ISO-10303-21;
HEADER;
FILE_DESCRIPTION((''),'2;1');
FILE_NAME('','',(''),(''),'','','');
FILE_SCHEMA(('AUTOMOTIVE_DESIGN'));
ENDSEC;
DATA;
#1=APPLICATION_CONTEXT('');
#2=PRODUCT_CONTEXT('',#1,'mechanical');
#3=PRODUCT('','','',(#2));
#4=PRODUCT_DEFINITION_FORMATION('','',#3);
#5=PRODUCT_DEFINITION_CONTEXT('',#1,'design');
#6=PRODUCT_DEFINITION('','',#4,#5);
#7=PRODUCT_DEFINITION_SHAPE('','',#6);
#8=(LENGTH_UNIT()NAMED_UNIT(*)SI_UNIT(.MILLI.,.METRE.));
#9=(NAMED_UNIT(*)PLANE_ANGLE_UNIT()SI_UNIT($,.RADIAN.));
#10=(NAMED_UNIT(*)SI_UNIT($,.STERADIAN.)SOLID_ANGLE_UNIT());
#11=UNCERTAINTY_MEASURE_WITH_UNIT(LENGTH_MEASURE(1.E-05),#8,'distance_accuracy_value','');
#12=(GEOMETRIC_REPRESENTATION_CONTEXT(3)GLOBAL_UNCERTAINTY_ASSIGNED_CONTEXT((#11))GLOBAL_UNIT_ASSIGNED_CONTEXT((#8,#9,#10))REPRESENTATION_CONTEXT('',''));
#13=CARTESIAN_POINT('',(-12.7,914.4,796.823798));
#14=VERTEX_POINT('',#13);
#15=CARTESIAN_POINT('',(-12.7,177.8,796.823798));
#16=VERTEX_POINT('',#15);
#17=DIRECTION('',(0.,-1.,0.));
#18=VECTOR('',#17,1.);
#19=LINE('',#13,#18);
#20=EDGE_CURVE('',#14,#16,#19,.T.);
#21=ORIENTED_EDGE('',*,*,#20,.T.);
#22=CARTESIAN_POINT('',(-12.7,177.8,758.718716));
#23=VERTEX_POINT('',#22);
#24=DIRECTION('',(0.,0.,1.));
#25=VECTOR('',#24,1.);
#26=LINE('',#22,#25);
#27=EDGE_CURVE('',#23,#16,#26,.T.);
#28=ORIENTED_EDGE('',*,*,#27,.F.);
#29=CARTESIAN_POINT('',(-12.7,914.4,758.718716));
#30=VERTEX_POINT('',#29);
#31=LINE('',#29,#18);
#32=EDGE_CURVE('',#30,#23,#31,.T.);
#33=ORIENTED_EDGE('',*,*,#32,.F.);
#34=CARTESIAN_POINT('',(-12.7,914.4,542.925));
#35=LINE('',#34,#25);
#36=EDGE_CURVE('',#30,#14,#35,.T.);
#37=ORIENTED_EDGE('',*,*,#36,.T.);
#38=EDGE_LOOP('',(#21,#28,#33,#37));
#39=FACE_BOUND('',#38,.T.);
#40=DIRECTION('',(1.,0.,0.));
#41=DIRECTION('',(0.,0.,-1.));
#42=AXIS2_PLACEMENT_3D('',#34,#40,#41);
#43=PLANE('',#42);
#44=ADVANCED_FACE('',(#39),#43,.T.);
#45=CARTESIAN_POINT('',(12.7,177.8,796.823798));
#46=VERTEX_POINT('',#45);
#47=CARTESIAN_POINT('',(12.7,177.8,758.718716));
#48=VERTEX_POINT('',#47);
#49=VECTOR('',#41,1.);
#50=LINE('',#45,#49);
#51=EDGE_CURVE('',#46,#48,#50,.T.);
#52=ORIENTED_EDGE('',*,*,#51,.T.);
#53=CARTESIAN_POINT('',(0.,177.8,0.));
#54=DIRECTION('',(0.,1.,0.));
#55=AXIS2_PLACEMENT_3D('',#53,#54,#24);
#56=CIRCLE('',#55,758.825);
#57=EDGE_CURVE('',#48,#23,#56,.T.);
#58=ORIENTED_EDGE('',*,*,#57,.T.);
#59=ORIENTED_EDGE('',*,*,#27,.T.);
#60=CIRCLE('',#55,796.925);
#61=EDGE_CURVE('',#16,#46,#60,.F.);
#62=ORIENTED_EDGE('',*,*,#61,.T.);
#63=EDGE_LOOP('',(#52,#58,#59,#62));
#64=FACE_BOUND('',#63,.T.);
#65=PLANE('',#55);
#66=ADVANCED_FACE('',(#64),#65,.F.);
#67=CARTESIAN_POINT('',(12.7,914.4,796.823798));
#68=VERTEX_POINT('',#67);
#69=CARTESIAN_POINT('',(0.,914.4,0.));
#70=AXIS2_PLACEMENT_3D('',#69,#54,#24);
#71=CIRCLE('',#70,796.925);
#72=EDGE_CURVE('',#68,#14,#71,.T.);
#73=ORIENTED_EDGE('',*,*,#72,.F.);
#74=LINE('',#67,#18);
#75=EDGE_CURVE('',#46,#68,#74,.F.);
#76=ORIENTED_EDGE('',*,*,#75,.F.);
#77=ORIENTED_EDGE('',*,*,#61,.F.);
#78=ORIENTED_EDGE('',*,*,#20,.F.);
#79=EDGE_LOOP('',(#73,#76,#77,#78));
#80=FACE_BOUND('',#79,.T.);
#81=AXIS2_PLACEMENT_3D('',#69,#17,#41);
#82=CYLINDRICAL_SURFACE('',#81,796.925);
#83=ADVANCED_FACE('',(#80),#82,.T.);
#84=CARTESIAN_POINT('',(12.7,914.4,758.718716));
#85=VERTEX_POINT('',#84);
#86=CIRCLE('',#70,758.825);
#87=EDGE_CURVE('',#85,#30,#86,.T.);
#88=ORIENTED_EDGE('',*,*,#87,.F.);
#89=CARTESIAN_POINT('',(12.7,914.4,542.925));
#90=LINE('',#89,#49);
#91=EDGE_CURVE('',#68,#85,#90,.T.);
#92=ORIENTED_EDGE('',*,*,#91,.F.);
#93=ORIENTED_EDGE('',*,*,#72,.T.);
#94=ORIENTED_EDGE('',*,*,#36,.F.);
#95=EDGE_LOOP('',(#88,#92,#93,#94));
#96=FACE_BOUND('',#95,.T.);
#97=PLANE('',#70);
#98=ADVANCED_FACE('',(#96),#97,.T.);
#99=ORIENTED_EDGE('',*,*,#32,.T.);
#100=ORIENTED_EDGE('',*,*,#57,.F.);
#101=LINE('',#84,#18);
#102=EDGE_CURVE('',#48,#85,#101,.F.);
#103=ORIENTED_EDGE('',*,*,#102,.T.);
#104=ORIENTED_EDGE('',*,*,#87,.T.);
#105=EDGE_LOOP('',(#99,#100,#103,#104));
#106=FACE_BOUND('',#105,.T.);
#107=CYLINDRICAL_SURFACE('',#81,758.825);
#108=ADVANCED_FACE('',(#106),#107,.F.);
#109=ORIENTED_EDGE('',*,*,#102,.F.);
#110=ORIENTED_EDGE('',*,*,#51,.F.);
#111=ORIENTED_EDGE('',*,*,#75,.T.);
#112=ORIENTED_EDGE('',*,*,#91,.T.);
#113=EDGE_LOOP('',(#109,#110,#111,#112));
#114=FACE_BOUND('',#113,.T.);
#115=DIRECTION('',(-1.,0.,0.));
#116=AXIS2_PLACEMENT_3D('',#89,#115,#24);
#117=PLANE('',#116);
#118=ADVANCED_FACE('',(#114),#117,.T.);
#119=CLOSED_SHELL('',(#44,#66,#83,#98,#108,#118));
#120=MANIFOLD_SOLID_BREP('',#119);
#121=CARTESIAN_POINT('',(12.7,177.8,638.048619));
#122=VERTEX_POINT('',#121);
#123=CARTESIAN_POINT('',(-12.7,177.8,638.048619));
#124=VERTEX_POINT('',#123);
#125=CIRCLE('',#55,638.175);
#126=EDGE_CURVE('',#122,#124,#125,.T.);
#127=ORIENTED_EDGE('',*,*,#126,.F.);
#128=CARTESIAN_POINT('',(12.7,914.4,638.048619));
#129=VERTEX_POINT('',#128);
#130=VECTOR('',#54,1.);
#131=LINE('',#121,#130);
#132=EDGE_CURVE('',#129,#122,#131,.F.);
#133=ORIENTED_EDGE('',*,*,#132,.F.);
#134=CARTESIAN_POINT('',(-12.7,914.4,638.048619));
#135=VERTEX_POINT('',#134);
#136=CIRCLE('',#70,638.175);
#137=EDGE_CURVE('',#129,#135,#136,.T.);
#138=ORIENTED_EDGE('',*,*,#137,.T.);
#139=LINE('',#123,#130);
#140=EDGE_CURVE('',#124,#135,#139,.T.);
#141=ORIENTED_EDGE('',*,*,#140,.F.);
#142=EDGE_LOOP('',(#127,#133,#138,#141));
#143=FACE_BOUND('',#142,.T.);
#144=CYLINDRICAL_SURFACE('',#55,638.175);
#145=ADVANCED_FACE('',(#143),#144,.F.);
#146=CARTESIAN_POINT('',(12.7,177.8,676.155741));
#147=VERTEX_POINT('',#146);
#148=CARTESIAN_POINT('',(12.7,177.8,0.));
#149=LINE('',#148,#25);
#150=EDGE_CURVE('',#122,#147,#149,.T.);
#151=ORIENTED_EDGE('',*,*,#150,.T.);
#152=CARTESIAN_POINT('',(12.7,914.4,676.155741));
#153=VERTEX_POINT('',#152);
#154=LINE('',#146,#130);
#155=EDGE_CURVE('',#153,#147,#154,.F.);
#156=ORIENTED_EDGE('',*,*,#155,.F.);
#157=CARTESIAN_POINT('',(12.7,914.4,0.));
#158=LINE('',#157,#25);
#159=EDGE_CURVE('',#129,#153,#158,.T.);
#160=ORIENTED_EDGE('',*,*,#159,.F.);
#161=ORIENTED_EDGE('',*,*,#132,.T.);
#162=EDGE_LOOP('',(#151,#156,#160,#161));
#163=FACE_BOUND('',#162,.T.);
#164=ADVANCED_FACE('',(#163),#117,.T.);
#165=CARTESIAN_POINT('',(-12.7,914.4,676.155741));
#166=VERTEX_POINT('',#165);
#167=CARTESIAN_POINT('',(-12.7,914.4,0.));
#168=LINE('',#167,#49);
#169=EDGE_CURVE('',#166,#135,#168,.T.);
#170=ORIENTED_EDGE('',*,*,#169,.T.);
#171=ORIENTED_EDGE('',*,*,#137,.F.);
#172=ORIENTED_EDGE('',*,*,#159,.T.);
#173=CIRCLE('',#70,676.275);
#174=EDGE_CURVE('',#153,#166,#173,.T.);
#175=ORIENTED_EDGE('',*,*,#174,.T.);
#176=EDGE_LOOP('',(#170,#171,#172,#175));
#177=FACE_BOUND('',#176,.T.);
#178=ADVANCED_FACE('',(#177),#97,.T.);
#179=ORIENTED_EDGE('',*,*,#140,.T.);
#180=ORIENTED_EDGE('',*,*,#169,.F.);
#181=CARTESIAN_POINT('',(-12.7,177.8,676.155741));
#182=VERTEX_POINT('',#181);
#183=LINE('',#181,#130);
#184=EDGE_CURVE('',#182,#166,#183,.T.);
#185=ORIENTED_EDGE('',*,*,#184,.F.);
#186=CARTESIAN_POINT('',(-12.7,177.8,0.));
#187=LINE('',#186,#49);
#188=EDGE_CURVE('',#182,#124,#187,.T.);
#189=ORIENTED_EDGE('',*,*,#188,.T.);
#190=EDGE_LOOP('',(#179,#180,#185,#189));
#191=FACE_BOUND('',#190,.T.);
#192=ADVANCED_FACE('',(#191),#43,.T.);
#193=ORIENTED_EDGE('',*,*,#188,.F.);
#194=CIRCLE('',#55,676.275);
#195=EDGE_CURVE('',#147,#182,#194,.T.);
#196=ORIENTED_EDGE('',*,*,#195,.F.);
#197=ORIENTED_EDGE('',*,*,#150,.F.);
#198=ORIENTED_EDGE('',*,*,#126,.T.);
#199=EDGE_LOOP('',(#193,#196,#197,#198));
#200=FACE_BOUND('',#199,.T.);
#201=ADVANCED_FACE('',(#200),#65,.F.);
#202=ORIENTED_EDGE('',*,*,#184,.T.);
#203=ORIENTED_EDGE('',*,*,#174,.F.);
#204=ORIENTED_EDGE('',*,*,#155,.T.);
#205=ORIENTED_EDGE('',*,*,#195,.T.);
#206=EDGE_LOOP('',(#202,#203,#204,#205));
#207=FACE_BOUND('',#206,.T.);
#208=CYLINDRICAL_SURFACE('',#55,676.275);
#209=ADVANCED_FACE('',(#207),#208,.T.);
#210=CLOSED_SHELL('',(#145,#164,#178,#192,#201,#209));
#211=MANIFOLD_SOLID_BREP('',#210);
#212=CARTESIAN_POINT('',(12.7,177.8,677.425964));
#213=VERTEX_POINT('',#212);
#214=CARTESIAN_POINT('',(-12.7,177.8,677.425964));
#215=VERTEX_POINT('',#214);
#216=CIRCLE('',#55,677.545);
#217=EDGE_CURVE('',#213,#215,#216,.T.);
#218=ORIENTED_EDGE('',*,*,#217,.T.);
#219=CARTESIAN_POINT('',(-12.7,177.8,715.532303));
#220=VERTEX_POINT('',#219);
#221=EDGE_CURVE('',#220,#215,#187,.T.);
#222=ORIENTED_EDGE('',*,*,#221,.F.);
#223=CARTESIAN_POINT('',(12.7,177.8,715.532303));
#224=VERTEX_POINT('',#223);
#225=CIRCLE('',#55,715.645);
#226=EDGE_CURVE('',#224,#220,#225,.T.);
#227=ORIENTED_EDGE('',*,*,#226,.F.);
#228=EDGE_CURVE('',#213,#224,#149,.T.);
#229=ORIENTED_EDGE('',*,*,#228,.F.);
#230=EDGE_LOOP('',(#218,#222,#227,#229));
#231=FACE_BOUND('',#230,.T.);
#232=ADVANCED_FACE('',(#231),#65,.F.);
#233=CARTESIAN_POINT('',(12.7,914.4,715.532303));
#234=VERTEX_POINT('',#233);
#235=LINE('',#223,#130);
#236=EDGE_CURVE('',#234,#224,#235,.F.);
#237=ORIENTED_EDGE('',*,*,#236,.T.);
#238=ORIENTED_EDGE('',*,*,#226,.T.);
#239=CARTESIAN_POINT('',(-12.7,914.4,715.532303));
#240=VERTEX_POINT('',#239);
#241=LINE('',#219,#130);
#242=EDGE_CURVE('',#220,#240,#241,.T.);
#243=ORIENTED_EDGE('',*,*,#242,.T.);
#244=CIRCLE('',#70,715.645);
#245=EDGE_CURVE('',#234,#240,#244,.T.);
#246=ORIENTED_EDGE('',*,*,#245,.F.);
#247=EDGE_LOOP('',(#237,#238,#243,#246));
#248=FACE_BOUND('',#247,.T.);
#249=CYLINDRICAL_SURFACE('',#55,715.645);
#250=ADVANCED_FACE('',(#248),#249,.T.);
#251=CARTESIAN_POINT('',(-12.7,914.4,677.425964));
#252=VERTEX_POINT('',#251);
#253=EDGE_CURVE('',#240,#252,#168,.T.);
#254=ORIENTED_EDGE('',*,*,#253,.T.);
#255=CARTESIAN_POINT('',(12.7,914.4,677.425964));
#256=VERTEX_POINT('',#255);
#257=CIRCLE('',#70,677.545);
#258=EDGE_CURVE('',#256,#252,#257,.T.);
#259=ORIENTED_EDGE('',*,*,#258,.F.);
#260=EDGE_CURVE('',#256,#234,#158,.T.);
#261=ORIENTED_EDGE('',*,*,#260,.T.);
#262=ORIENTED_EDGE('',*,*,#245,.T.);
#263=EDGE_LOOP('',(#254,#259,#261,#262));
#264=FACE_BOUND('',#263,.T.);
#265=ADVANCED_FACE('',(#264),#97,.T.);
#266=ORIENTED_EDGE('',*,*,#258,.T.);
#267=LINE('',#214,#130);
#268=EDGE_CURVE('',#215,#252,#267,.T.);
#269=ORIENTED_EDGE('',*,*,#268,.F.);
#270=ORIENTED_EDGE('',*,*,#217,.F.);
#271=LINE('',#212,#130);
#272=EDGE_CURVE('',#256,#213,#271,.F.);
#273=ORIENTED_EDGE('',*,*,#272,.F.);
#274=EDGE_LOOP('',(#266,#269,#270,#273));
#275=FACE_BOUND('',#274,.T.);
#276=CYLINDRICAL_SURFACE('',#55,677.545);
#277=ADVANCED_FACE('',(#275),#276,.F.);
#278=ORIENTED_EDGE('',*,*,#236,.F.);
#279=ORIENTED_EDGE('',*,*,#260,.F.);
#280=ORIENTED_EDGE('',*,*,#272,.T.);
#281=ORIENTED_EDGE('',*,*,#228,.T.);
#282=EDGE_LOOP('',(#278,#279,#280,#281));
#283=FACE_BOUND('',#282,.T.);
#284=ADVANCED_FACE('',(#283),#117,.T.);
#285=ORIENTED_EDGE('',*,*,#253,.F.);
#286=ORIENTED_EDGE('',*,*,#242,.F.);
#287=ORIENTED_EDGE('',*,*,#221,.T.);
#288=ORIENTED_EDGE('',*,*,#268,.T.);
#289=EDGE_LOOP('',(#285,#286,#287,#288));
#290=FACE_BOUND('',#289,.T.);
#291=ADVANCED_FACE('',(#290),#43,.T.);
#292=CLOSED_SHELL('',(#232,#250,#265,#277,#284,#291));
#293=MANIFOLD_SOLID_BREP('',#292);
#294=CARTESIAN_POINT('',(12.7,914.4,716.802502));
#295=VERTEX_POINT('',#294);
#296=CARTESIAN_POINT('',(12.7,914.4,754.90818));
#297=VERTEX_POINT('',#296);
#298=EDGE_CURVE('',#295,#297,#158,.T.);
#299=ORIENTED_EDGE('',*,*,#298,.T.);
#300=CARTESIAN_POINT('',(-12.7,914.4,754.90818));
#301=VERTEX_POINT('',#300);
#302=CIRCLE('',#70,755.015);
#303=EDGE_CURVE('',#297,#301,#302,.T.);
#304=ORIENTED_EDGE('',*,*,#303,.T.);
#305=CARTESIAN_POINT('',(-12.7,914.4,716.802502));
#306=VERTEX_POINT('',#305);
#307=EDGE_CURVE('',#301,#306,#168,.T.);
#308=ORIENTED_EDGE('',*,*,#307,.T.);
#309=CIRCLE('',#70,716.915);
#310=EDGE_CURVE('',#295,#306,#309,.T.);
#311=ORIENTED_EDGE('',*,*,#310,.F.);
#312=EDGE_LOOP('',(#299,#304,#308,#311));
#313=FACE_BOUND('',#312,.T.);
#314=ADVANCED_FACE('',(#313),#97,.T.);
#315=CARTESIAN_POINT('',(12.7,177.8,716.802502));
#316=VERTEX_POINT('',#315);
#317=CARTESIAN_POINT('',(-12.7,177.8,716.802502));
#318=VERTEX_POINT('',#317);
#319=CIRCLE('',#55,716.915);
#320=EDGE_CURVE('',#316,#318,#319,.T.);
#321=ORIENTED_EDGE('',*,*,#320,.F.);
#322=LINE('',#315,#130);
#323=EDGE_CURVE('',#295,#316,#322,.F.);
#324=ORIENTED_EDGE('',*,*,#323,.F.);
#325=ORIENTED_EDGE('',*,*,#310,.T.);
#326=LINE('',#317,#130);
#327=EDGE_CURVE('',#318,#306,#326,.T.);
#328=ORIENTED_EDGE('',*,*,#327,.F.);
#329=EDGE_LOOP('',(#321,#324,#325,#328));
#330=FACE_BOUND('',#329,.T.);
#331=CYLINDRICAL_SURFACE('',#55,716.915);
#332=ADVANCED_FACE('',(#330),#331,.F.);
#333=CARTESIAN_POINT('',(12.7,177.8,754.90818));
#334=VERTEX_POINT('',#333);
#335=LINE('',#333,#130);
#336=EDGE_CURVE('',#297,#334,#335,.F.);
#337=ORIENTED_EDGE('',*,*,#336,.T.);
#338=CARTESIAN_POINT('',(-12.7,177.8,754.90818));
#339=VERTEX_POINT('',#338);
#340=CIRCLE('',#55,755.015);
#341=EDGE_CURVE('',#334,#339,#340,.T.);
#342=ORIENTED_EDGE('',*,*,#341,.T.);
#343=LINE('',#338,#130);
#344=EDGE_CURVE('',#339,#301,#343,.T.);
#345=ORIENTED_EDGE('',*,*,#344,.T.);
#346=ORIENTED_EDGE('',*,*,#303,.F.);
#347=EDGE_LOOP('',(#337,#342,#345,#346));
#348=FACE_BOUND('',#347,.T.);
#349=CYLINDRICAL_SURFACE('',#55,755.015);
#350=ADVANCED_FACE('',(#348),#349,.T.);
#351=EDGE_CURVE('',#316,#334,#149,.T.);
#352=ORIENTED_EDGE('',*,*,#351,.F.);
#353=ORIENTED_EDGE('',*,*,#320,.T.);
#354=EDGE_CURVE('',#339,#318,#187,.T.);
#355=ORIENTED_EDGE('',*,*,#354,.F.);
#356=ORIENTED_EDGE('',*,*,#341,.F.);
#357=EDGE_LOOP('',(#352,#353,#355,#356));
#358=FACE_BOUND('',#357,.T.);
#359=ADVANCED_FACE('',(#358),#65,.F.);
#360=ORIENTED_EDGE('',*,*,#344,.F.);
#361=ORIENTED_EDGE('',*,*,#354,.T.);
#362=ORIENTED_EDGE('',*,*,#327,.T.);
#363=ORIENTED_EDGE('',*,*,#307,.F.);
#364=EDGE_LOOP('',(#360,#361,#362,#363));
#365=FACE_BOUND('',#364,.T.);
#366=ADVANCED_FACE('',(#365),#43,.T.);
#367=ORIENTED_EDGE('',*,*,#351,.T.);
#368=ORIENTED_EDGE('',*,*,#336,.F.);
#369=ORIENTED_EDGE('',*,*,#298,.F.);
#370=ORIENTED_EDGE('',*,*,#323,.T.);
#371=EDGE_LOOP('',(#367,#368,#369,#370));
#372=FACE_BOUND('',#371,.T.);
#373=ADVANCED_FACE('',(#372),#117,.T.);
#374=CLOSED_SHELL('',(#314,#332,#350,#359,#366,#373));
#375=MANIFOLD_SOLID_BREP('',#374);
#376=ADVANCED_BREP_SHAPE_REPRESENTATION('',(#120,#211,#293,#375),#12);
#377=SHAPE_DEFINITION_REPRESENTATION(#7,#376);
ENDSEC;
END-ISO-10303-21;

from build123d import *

# Parameters (mm, degrees)
BOSS_EXTRUDE1_OUTLINE_R   = 796.925
BOSS_EXTRUDE1_OUTLINE_R_2 = 758.825
BOSS_EXTRUDE1_DEPTH       = 914.4
SKETCH3_R                 = 676.275
SKETCH3_R_2               = 638.175
BOSS_EXTRUDE2_DEPTH       = 736.6
SKETCH3_R_3               = 715.645
SKETCH3_R_4               = 677.545
BOSS_EXTRUDE2_2_DEPTH     = 736.6
SKETCH3_R_5               = 755.015
SKETCH3_R_6               = 716.915
BOSS_EXTRUDE2_3_DEPTH     = 736.6
SKETCH2_W                 = 25.4
SKETCH2_H                 = 508
CUT_EXTRUDE2_DEPTH        = 1452.311913839
CUT_EXTRUDE3_DEPTH        = 177.8


# Read off the part's stored shape, not the designer's step: Boss-Extrude1
with BuildPart() as part:
    # Boss-Extrude1 outline → Boss-Extrude1 (new body)
    with BuildSketch(Plane(origin=(0, 0, 0), x_dir=(1, 0, 0), z_dir=(0, 1, 0))):
        Circle(BOSS_EXTRUDE1_OUTLINE_R)
        Circle(BOSS_EXTRUDE1_OUTLINE_R_2, mode=Mode.SUBTRACT)
    extrude(amount=BOSS_EXTRUDE1_DEPTH)


with BuildPart() as body_2:
    # Sketch3 → Boss-Extrude2 (new body)
    with BuildSketch(Plane(origin=(0, 914.4, 0), x_dir=(1, 0, 0), z_dir=(0, 1, 0))):
        with Locations(Location((0, 0, 0), (0, 0, 270))):
            Circle(SKETCH3_R)
        with Locations(Location((0, 0, 0), (0, 0, 270))):
            Circle(SKETCH3_R_2, mode=Mode.SUBTRACT)
    extrude(amount=-BOSS_EXTRUDE2_DEPTH)


with BuildPart() as body_3:
    # Sketch3 → Boss-Extrude2 2 (new body)
    with BuildSketch(Plane(origin=(0, 914.4, 0), x_dir=(1, 0, 0), z_dir=(0, 1, 0))):
        with Locations(Location((0, 0, 0), (0, 0, 270))):
            Circle(SKETCH3_R_3)
        with Locations(Location((0, 0, 0), (0, 0, 270))):
            Circle(SKETCH3_R_4, mode=Mode.SUBTRACT)
    extrude(amount=-BOSS_EXTRUDE2_2_DEPTH)


with BuildPart() as body_4:
    # Sketch3 → Boss-Extrude2 3 (new body)
    with BuildSketch(Plane(origin=(0, 914.4, 0), x_dir=(1, 0, 0), z_dir=(0, 1, 0))):
        with Locations(Location((0, 0, 0), (0, 0, 270))):
            Circle(SKETCH3_R_5)
        with Locations(Location((0, 0, 0), (0, 0, 270))):
            Circle(SKETCH3_R_6, mode=Mode.SUBTRACT)
    extrude(amount=-BOSS_EXTRUDE2_3_DEPTH)


with BuildPart() as cut_extrude2_tool:
    # Sketch2 → Cut-Extrude2 (new, through all)
    with BuildSketch(Plane(origin=(0, 0, 0), x_dir=(1, 0, 0), z_dir=(0, 1, 0))):
        with Locations((0, -796.925)):
            Rectangle(SKETCH2_W, SKETCH2_H)
    extrude(amount=CUT_EXTRUDE2_DEPTH)


with BuildPart() as part_1:
    add(part.part)

    # Cut-Extrude2: cut by cut_extrude2_tool
    add(cut_extrude2_tool.part, mode=Mode.SUBTRACT)

    # Sketch4 → Cut-Extrude3 (cut)
    with BuildSketch(Plane.XZ):
        with BuildLine():
            Line((12.7, 796.823798355), (12.7, 758.718716406))
            ThreePointArc((12.7, 758.718716406), (0, -758.825), (-12.7, 758.718716406))
            Line((-12.7, 758.718716406), (-12.7, 796.823798355))
            ThreePointArc((-12.7, 796.823798355), (0, -796.925), (12.7, 796.823798355))
        make_face()
    extrude(amount=-CUT_EXTRUDE3_DEPTH, mode=Mode.SUBTRACT)


with BuildPart() as body_2_1:
    add(body_2.part)

    # Cut-Extrude2: cut by cut_extrude2_tool
    add(cut_extrude2_tool.part, mode=Mode.SUBTRACT)


with BuildPart() as body_3_1:
    add(body_3.part)

    # Cut-Extrude2: cut by cut_extrude2_tool
    add(cut_extrude2_tool.part, mode=Mode.SUBTRACT)


with BuildPart() as body_4_1:
    add(body_4.part)

    # Cut-Extrude2: cut by cut_extrude2_tool
    add(cut_extrude2_tool.part, mode=Mode.SUBTRACT)


solid = Compound([part_1.part, body_2_1.part, body_3_1.part, body_4_1.part])
